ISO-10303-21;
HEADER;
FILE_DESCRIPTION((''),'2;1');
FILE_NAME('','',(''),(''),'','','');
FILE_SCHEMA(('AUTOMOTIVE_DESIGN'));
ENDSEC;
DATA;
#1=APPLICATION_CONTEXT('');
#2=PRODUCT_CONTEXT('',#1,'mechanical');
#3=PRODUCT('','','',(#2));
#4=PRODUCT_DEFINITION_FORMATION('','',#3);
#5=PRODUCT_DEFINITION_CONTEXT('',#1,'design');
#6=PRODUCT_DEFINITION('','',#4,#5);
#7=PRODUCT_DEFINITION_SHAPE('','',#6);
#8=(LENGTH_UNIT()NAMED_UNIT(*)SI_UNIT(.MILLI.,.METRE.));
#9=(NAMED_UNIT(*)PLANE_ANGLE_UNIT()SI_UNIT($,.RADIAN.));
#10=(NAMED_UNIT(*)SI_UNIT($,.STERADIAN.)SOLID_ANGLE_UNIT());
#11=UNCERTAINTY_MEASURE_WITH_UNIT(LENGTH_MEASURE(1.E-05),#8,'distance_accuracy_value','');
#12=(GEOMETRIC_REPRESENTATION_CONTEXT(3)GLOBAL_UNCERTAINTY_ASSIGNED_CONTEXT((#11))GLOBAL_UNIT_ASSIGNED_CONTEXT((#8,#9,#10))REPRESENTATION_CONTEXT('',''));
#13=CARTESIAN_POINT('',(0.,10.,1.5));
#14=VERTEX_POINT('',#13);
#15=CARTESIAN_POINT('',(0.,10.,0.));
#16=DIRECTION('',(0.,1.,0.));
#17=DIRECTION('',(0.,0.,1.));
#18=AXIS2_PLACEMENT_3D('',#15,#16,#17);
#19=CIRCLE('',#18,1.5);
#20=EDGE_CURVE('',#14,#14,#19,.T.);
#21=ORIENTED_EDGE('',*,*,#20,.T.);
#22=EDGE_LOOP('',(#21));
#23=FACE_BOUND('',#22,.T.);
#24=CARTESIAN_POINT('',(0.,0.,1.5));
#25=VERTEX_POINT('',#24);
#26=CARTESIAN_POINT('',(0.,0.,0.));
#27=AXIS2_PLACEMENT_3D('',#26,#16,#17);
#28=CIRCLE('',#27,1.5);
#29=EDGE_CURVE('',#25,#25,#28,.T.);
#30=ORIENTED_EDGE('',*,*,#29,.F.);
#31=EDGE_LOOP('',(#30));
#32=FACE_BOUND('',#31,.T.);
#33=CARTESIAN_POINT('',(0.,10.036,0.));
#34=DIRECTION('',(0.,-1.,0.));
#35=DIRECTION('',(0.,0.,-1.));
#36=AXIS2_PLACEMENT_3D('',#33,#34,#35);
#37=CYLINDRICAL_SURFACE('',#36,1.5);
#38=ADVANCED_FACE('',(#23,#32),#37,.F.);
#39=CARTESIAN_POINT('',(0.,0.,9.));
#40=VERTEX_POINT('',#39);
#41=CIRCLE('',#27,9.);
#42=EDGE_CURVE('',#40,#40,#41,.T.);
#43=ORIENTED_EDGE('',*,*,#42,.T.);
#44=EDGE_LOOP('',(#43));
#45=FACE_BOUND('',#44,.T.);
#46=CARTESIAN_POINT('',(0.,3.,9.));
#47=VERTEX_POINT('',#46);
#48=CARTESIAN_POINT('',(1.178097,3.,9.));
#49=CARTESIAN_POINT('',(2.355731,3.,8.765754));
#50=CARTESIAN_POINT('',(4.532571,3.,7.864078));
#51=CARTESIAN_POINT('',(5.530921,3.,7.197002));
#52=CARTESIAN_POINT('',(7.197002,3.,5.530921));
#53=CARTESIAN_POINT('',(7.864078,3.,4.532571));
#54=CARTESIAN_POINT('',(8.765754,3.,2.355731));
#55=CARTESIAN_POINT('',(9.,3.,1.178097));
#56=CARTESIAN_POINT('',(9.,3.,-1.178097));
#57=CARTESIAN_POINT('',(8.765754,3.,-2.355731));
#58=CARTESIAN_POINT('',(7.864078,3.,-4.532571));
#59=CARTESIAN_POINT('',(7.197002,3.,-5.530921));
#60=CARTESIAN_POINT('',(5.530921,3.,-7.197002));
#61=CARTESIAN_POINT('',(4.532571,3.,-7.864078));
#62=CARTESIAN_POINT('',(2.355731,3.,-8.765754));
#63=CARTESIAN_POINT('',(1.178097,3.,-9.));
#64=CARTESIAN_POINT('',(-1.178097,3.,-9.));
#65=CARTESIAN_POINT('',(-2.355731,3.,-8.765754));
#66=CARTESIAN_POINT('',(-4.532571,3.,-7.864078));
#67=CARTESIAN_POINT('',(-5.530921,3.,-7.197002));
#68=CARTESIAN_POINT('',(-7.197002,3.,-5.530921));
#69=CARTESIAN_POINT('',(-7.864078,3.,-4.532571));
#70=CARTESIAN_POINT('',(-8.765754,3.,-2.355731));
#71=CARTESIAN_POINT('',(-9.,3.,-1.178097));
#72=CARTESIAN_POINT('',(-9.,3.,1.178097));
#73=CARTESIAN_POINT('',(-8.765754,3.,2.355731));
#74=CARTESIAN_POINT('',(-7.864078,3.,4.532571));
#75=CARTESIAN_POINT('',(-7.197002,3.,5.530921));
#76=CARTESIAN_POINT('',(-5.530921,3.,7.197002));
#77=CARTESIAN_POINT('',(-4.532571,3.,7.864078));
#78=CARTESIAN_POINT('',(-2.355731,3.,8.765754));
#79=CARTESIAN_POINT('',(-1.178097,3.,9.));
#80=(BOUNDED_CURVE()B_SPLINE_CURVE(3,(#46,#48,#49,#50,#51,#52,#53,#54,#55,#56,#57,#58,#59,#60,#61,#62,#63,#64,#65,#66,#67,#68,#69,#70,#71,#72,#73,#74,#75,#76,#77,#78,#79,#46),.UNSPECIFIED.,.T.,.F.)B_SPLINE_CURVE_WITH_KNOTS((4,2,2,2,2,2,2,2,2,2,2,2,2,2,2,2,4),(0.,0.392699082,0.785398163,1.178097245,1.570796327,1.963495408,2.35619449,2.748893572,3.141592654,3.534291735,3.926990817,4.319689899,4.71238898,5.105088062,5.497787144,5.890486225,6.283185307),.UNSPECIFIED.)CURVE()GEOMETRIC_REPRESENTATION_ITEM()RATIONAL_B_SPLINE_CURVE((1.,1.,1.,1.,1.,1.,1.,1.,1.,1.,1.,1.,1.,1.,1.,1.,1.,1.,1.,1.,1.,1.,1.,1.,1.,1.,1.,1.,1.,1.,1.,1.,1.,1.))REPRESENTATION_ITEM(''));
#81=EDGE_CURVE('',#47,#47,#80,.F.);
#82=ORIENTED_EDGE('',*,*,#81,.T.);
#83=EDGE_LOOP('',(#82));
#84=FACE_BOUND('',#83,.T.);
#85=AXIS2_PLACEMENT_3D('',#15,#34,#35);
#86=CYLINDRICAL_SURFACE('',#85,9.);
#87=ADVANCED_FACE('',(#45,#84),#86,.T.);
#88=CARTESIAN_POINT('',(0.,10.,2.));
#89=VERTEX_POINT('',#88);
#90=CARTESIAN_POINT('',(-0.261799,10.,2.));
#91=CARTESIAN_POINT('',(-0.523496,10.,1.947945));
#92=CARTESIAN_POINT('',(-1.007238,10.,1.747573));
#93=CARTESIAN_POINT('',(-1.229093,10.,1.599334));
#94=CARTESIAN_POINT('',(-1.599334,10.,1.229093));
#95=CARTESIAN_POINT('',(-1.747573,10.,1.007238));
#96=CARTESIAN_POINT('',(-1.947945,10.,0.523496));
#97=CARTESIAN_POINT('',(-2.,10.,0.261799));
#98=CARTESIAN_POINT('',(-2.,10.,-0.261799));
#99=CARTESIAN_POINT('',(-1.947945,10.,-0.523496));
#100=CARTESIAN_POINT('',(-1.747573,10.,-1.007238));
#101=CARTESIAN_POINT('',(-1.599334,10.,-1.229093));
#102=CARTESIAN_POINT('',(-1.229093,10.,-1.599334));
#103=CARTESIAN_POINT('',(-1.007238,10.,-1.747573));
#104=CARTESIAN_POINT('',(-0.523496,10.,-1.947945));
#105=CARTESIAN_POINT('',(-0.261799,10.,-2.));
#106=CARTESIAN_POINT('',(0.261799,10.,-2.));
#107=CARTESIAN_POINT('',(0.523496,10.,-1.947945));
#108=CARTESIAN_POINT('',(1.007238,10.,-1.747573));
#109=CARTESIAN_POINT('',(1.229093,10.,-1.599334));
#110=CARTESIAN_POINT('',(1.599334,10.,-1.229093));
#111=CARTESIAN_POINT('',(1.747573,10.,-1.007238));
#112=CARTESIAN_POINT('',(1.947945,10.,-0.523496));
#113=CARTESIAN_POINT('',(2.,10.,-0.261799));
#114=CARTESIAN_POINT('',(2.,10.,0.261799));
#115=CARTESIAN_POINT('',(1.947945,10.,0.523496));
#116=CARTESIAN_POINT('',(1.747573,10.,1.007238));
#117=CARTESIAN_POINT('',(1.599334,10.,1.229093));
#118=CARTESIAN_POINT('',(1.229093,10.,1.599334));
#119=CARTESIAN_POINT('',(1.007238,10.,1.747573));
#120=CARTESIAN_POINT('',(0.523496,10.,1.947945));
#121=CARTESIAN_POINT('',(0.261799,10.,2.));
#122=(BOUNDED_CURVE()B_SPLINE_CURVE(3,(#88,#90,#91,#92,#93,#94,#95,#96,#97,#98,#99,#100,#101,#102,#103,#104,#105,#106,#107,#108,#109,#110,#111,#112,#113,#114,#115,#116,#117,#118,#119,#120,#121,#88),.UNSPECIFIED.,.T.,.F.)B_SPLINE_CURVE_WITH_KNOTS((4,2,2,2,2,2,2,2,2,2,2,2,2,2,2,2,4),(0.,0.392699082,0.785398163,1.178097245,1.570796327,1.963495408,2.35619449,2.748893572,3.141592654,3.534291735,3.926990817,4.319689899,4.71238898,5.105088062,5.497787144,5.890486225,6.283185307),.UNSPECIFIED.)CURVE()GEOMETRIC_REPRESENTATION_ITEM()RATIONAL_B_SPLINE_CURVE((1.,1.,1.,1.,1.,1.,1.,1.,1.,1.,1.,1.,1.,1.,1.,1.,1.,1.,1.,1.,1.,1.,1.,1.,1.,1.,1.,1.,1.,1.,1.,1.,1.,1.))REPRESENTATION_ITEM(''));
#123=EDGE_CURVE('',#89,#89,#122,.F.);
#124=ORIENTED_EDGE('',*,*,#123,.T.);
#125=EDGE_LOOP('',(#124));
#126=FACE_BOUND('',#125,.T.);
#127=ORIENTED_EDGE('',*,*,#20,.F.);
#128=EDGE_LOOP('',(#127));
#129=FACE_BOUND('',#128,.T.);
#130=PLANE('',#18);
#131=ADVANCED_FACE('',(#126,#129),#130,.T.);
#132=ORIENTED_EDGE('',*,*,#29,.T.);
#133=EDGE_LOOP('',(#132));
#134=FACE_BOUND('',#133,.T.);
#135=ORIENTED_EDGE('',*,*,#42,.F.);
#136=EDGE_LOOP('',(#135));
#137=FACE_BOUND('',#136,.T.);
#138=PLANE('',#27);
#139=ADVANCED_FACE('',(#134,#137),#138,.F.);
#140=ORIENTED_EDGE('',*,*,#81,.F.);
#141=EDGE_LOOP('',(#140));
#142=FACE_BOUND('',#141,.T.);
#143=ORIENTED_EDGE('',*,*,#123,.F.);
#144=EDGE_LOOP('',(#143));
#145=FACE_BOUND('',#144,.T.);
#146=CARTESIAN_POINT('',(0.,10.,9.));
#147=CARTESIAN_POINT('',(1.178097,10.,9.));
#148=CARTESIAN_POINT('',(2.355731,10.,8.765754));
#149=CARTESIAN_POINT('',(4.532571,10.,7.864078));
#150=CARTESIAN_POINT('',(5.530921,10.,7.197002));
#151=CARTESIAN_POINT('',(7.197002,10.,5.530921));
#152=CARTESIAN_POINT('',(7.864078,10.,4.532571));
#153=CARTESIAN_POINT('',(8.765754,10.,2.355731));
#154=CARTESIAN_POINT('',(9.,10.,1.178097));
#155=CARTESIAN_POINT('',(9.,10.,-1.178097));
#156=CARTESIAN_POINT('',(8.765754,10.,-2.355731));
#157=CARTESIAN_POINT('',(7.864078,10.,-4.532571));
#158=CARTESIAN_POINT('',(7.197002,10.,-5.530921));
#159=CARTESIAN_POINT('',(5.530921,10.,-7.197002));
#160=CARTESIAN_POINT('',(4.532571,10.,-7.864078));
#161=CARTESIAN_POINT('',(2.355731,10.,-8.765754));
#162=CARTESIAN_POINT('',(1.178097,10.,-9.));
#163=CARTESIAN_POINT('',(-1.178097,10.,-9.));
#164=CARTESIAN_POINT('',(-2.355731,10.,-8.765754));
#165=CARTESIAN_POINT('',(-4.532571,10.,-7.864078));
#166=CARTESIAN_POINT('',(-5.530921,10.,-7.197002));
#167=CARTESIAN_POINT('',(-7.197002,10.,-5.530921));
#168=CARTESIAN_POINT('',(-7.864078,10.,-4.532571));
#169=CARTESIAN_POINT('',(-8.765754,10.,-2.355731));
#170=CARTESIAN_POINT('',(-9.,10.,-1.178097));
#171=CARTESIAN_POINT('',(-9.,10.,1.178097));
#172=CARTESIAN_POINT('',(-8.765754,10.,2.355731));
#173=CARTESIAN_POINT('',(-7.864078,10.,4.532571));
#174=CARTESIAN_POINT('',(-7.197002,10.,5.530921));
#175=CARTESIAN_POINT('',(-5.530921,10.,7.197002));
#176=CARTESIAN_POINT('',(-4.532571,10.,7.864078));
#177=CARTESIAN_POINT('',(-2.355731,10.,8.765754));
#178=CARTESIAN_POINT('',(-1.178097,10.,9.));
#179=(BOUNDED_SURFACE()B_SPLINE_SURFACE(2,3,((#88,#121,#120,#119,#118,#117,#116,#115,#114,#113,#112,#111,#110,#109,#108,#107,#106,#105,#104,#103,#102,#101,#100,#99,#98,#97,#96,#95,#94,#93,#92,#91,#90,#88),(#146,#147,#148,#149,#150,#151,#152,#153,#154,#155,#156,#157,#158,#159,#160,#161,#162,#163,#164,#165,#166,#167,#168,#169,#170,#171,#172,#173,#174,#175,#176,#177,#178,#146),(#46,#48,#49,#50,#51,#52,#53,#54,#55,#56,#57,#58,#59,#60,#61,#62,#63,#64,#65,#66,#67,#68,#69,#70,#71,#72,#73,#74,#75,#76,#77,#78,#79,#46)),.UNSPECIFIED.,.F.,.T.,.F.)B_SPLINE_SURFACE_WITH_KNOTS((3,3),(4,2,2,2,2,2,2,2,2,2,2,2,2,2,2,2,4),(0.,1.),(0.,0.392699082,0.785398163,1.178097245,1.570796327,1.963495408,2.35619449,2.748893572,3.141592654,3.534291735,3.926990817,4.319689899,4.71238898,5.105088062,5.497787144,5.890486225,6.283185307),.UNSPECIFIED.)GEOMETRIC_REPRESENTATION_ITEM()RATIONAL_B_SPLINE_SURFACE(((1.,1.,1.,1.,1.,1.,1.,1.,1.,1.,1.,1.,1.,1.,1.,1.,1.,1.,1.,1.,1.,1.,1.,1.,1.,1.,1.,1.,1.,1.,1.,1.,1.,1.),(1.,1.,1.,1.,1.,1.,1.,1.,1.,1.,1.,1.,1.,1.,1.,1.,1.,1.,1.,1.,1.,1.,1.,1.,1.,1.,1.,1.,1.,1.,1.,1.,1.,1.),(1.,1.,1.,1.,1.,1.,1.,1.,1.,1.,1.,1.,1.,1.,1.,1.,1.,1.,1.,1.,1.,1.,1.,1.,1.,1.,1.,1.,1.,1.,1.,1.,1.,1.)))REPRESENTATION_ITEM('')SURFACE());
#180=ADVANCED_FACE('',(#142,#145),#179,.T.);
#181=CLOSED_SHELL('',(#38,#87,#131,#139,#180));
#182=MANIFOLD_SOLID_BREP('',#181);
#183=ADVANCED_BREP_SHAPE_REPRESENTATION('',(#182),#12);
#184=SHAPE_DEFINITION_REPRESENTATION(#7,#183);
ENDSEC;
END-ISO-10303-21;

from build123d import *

# Parameters (mm, degrees)
SZKIC1_R                    = 9
DODANIE_WYCI_GNI_CIE1_DEPTH = 10
ZAOKR_GLENIE1_SIZE          = 7
WYTNIJ_WYCI_GNI_CIE1_REACH  = 18.186
SZKIC2_R                    = 1.5


with BuildPart() as part:
    # Szkic1 → Dodanie-wyciągnięcie1 (new body)
    with BuildSketch(Plane(origin=(0, 0, 0), x_dir=(1, 0, 0), z_dir=(0, 1, 0))):
        with Locations(Location((0, 0, 0), (0, 0, 270))):
            Circle(SZKIC1_R)
    extrude(amount=DODANIE_WYCI_GNI_CIE1_DEPTH)

    # Zaokrąglenie1
    # a fillet whose section is not a circle: 7 mm, written as the material it takes off along each edge
    with BuildSketch(Plane(origin=(0, 10, 0), x_dir=(0, 0, 1), z_dir=(-1, 0, 0))) as zaokr_glenie1_piece_1:
        with BuildLine():
            Bezier((9, -ZAOKR_GLENIE1_SIZE), (9, 0), (9 - ZAOKR_GLENIE1_SIZE, 0), weights=[1, 1, 1])
            Line((9 - ZAOKR_GLENIE1_SIZE, 0), (9, 0))
            Line((9, 0), (9, -ZAOKR_GLENIE1_SIZE))
        make_face()
    revolve(axis=Axis((0, 10, 0), (0, 1, 0)), mode=Mode.SUBTRACT)

    # Szkic2 → Wytnij-wyciągnięcie1 (cut, up to next)
    with BuildSketch(Plane(origin=(0, 0, 0), x_dir=(1, 0, 0), z_dir=(0, 1, 0)), mode=Mode.PRIVATE) as wytnij_wyci_gni_cie1_sk1:
        with Locations(Location((0, 0, 0), (0, 0, 270))):
            Circle(SZKIC2_R)
    wytnij_wyci_gni_cie1_tool1 = extrude(wytnij_wyci_gni_cie1_sk1.sketch, amount=WYTNIJ_WYCI_GNI_CIE1_REACH, mode=Mode.PRIVATE) & part.part
    add(wytnij_wyci_gni_cie1_tool1.solids().sort_by_distance((0, 0, 0))[0], mode=Mode.SUBTRACT)


solid = part.part
